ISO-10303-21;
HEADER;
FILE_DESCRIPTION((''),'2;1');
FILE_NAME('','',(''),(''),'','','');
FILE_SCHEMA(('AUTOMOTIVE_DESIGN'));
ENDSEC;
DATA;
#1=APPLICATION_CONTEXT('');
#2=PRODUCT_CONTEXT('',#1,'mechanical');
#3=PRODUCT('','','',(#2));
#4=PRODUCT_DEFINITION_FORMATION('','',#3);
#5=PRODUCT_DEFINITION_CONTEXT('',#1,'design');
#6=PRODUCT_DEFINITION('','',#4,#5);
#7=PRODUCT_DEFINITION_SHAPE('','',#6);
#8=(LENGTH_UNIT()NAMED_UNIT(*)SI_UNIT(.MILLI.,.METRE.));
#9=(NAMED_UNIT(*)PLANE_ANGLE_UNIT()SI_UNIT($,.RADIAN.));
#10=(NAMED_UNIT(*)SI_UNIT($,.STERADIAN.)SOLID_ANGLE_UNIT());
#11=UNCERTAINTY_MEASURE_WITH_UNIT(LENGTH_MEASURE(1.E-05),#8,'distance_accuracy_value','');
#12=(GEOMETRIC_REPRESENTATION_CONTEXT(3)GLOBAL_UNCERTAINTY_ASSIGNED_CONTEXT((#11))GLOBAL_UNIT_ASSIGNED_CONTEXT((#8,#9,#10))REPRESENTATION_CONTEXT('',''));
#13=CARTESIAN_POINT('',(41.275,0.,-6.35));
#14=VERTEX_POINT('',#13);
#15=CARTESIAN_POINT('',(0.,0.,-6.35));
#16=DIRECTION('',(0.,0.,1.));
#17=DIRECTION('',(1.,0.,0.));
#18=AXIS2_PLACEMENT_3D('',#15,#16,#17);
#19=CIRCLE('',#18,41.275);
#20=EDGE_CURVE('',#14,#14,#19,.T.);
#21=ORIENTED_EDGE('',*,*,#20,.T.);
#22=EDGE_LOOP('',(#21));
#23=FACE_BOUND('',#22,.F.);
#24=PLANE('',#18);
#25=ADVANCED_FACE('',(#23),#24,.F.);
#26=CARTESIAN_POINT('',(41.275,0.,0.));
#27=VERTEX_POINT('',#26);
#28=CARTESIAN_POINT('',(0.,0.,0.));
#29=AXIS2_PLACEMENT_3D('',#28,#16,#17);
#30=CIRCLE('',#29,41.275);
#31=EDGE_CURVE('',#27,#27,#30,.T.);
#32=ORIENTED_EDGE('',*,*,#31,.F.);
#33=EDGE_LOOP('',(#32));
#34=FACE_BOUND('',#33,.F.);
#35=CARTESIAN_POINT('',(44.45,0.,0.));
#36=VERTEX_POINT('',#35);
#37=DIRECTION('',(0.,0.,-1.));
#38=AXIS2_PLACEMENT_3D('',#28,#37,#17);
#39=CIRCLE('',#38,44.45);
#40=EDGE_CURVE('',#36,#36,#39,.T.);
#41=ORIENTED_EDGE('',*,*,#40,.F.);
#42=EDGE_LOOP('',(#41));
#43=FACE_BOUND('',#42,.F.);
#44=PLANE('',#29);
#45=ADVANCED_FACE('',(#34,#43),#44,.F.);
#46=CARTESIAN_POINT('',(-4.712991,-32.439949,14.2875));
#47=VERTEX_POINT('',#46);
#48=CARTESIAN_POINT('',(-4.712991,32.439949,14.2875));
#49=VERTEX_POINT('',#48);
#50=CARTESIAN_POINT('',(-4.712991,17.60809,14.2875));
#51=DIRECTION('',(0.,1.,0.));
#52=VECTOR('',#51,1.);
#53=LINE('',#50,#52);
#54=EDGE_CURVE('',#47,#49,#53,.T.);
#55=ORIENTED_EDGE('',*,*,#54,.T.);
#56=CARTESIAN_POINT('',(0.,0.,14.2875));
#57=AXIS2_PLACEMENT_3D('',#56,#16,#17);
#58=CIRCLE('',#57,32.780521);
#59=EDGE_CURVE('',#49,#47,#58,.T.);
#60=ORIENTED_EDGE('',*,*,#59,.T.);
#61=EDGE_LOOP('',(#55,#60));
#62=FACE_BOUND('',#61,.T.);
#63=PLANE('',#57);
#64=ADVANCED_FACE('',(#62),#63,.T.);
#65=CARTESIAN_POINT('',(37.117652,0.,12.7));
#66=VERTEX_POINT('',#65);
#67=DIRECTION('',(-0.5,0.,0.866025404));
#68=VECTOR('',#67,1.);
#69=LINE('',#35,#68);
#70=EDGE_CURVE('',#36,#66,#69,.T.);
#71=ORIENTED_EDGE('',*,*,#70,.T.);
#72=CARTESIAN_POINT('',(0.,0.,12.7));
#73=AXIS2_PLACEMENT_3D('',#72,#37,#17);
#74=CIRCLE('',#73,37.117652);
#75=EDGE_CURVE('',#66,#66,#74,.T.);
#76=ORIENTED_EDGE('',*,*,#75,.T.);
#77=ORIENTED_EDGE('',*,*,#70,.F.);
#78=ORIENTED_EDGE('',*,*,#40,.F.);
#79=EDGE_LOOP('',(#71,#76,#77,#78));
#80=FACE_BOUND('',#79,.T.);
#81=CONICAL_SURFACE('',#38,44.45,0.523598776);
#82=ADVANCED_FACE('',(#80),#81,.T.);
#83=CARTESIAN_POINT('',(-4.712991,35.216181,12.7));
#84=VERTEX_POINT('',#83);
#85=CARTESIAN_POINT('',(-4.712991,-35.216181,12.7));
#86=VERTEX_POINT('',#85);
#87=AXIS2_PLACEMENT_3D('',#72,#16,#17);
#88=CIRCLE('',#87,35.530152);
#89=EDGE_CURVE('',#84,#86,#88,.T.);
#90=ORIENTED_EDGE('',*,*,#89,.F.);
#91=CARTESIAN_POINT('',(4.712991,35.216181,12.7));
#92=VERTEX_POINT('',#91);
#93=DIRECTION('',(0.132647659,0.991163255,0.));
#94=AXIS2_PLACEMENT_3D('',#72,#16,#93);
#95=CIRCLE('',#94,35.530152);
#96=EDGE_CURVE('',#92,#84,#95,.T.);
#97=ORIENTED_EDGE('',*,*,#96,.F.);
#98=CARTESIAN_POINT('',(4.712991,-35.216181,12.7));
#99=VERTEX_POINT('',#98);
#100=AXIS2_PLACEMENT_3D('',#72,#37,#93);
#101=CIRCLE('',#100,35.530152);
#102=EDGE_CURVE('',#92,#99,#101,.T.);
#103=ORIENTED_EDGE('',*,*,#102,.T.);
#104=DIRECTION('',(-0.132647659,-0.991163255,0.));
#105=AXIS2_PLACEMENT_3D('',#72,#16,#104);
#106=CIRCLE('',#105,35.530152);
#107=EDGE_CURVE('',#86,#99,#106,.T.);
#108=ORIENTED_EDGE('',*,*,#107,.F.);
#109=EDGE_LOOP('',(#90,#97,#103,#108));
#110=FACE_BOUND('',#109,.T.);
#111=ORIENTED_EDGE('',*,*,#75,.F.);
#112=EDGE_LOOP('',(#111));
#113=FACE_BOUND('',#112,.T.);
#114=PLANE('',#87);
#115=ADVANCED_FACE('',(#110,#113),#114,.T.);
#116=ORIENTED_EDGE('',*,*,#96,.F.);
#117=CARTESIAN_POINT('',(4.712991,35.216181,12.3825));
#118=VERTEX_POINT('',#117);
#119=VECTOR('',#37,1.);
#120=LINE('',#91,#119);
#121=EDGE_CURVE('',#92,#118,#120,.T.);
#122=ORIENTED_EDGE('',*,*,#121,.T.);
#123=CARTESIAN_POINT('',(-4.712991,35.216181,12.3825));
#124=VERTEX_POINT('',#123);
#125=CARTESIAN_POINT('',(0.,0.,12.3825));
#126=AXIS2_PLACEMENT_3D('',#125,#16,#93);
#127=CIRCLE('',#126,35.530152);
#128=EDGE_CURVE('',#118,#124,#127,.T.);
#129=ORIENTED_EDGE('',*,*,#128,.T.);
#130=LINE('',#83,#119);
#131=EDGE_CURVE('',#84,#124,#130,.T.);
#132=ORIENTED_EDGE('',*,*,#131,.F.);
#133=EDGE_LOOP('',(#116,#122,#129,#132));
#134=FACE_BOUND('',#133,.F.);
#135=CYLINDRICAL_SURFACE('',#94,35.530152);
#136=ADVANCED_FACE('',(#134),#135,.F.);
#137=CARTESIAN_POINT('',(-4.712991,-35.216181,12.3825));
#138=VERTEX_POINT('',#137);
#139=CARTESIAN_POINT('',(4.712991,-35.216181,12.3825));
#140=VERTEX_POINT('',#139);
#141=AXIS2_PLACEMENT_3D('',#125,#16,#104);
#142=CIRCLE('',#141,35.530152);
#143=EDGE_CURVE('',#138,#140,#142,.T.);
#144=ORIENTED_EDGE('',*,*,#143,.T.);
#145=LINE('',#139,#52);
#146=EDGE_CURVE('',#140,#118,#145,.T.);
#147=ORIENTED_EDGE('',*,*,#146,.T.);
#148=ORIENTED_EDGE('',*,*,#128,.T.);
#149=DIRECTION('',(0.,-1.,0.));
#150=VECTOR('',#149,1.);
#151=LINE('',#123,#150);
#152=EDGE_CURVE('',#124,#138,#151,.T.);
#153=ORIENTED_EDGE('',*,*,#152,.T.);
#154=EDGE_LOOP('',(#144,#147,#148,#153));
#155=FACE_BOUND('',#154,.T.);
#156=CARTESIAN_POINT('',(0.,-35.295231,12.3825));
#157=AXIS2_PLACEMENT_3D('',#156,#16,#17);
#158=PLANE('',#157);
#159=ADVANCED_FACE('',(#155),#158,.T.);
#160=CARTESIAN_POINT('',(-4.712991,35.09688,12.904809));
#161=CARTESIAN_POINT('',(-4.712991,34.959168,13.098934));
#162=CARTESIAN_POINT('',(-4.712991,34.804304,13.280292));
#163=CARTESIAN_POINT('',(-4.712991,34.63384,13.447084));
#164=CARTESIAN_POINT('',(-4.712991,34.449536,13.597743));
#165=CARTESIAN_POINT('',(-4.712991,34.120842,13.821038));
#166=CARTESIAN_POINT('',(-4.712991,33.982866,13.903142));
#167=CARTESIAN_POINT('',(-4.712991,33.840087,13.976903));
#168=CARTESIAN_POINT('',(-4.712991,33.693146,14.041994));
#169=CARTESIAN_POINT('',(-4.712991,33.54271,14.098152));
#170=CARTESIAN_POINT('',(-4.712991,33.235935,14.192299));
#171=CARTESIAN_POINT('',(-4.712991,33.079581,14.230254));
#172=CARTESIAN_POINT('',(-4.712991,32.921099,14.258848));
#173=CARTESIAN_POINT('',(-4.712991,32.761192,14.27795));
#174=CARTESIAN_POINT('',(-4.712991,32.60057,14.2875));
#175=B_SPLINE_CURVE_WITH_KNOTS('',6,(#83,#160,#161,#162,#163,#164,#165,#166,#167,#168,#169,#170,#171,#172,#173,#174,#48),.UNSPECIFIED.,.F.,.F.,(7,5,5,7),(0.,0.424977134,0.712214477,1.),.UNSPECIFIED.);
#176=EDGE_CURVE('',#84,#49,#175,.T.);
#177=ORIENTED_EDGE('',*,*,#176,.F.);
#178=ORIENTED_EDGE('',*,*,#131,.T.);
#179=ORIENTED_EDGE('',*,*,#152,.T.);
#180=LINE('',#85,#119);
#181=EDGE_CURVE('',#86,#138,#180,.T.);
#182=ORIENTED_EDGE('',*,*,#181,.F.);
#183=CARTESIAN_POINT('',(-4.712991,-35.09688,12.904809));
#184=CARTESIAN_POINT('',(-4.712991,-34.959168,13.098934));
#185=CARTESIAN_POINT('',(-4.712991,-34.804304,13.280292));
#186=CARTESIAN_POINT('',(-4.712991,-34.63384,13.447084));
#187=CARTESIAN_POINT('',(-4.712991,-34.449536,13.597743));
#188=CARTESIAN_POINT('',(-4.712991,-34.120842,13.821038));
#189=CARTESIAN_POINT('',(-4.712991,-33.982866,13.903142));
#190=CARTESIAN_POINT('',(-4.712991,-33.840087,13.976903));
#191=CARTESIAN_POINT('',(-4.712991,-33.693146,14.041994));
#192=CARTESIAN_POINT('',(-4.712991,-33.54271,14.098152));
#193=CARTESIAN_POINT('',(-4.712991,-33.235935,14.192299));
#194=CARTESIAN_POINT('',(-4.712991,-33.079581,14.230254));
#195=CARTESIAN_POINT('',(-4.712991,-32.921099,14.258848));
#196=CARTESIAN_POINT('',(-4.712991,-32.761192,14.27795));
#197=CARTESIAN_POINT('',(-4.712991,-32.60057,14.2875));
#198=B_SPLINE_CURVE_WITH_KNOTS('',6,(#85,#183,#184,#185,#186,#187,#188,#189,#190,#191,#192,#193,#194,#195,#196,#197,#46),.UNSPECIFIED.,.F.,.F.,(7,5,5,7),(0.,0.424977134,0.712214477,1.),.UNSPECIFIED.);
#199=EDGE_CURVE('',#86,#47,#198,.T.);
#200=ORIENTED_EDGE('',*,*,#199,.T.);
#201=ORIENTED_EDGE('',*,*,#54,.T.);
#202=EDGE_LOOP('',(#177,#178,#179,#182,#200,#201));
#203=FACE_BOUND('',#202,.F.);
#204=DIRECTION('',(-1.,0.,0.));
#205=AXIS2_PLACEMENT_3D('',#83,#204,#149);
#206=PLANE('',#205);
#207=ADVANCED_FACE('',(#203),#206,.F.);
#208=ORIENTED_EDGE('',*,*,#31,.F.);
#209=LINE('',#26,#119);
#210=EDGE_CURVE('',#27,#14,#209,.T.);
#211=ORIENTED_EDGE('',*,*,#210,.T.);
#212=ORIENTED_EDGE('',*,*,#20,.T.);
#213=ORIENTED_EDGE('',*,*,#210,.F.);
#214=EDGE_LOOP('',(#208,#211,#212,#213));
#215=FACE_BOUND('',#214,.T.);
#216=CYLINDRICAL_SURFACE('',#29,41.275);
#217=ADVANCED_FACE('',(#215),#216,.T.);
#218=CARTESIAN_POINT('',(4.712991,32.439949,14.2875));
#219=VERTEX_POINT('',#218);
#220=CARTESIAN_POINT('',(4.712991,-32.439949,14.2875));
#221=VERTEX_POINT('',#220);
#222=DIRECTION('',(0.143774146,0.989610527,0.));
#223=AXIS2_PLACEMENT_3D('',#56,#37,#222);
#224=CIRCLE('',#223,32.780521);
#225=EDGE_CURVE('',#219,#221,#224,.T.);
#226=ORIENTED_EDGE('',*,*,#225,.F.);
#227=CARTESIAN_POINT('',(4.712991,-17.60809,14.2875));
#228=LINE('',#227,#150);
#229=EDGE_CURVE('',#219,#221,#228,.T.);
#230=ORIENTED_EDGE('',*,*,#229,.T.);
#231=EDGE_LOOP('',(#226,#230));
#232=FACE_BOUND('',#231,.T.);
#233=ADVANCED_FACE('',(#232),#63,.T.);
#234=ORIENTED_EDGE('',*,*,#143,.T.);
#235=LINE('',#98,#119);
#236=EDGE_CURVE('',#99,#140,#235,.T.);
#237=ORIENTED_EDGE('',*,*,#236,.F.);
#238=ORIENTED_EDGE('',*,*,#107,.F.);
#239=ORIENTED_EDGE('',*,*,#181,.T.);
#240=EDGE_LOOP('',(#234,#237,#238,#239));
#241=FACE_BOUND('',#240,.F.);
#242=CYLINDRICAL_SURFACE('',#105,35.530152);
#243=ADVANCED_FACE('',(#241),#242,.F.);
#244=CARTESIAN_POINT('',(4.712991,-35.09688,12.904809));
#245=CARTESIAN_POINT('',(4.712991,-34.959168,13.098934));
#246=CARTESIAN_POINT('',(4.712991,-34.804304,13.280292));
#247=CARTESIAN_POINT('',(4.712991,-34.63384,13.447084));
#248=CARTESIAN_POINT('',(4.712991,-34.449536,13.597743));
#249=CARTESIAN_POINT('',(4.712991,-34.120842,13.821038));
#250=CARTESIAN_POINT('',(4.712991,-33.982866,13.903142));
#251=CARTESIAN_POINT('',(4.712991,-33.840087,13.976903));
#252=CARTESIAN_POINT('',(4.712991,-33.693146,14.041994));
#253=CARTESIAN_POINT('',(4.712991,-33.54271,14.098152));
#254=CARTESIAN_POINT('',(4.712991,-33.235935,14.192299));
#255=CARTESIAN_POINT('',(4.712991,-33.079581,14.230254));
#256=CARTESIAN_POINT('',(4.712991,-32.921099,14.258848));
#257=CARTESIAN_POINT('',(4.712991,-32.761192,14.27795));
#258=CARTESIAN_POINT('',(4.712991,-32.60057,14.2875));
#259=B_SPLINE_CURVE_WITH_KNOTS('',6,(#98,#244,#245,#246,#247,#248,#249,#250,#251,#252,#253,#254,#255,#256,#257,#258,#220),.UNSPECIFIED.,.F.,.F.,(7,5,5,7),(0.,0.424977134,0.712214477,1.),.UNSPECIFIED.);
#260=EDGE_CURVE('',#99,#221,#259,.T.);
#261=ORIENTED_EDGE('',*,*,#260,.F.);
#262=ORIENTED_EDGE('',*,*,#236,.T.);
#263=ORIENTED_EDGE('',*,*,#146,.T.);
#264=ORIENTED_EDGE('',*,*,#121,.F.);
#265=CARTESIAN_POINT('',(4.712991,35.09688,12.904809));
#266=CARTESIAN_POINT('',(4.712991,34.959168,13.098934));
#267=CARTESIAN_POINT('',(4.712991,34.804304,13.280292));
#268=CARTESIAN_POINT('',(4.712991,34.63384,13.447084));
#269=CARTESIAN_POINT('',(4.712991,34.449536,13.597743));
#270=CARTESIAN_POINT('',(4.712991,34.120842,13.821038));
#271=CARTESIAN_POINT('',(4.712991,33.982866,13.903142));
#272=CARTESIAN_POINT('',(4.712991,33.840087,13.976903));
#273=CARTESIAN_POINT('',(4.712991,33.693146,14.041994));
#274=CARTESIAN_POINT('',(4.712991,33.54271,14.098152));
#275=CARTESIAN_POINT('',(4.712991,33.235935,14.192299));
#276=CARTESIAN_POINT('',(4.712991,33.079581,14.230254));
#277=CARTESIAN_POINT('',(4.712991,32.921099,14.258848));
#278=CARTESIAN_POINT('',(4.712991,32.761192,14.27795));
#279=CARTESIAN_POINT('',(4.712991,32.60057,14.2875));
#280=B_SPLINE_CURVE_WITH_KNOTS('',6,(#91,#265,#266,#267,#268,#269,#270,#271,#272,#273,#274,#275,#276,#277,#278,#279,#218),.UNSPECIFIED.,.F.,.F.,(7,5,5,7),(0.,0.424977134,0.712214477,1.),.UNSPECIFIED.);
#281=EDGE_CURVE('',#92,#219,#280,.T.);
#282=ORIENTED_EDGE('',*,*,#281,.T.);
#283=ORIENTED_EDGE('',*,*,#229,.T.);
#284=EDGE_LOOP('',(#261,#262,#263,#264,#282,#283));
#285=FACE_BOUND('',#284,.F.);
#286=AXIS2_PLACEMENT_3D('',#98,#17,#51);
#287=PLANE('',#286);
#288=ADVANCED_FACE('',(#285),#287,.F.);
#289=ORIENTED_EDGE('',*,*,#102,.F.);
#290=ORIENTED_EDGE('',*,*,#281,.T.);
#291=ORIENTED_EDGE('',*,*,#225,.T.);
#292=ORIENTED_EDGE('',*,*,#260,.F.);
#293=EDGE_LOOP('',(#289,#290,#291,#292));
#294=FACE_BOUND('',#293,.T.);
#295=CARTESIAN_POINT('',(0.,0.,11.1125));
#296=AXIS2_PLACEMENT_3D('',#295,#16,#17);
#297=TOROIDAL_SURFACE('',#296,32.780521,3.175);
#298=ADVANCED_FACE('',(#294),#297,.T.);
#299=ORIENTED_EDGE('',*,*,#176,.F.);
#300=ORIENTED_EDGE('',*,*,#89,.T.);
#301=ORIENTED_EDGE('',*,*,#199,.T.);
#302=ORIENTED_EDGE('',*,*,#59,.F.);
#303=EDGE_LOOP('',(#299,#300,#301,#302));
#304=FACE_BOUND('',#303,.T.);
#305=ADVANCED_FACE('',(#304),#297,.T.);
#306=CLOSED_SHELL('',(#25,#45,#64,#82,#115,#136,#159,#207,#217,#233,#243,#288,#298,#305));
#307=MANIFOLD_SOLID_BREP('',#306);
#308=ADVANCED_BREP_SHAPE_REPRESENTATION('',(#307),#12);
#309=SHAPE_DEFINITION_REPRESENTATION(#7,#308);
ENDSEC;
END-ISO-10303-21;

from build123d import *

# Parameters (mm, degrees)
F0_R     = 44.45
F0_R_2   = 41.275
F1_DEPTH = 12.7
F1_TAPER = 30
F2_DEPTH = 6.35
F3_R     = 35.5301515813
F4_DEPTH = 1.5875
F7_DEPTH = 2.9464
F8_DEPTH = 0.3175


# Not quite as in the source:
# - a fillet or chamfer that OpenCascade refuses, or shapes differently, is made with other operations: its cross-section is extruded or revolved along the edge and cut away or added


with BuildPart() as f1:
    # F0 (on Top) → F1 (new body)
    with BuildSketch(Plane.XY):
        Circle(F0_R)
        Circle(F0_R_2, mode=Mode.SUBTRACT)
        Circle(F0_R_2)
    extrude(amount=F1_DEPTH, taper=F1_TAPER)

    # F0 (on Top) → F2 (join)
    with BuildSketch(Plane.XY):
        Circle(F0_R_2)
    extrude(amount=-F2_DEPTH)

    # F3 (on face) → F4 (join)
    with BuildSketch(Plane.XY.offset(12.7)):
        Circle(F3_R)
    extrude(amount=F4_DEPTH)

    # F5: fillet of radius 3.175 on 1 edges, made by hand

    # F5_s1 → F5_t2 (revolve, cut)
    with BuildSketch(Plane.XZ):
        with BuildLine():
            ThreePointArc((35.5301515813, 12.7), (34.3680209243, 13.862130657), (32.7805209243, 14.2875))
            Line((32.7805209243, 14.2875), (35.5301515813, 14.2875))
            Line((35.5301515813, 14.2875), (35.5301515813, 12.7))
        make_face()
    revolve(axis=Axis((0, 0, 14.2875), (0, 0, 1)), mode=Mode.SUBTRACT)

    # F6 (on face) → F7 (cut)
    with BuildSketch(Plane.XY.offset(12.7)):
        with BuildLine():
            ThreePointArc((-4.7129914165, -35.0091413817), (0, -35.3249524893), (4.7129914165, -35.0091413817))
            Line((4.7129914165, -35.0091413817), (4.7129914165, 35.0091413817))
            ThreePointArc((4.7129914165, 35.0091413817), (0, 35.3249524893), (-4.7129914165, 35.0091413817))
            Line((-4.7129914165, 35.0091413817), (-4.7129914165, -35.0091413817))
        make_face()
        with BuildLine():
            ThreePointArc((-4.7129914165, -35.2161807029), (0, -35.5301515813), (4.7129914165, -35.2161807029))
            Line((4.7129914165, -35.2161807029), (4.7129914165, -35.0091413817))
            ThreePointArc((4.7129914165, -35.0091413817), (0, -35.3249524893), (-4.7129914165, -35.0091413817))
            Line((-4.7129914165, -35.0091413817), (-4.7129914165, -35.2161807029))
        make_face()
        with BuildLine():
            ThreePointArc((4.7129914165, 35.2161807029), (0, 35.5301515813), (-4.7129914165, 35.2161807029))
            Line((-4.7129914165, 35.2161807029), (-4.7129914165, 35.0091413817))
            ThreePointArc((-4.7129914165, 35.0091413817), (0, 35.3249524893), (4.7129914165, 35.0091413817))
            Line((4.7129914165, 35.0091413817), (4.7129914165, 35.2161807029))
        make_face()
    extrude(amount=F7_DEPTH, mode=Mode.SUBTRACT)

    # F6 (on face) → F8 (cut)
    with BuildSketch(Plane.XY.offset(12.7)):
        with BuildLine():
            ThreePointArc((-4.7129914165, -35.2161807029), (0, -35.5301515813), (4.7129914165, -35.2161807029))
            Line((4.7129914165, -35.2161807029), (4.7129914165, -35.0091413817))
            ThreePointArc((4.7129914165, -35.0091413817), (0, -35.3249524893), (-4.7129914165, -35.0091413817))
            Line((-4.7129914165, -35.0091413817), (-4.7129914165, -35.2161807029))
        make_face()
        with BuildLine():
            ThreePointArc((-4.7129914165, -35.0091413817), (0, -35.3249524893), (4.7129914165, -35.0091413817))
            Line((4.7129914165, -35.0091413817), (4.7129914165, 35.0091413817))
            ThreePointArc((4.7129914165, 35.0091413817), (0, 35.3249524893), (-4.7129914165, 35.0091413817))
            Line((-4.7129914165, 35.0091413817), (-4.7129914165, -35.0091413817))
        make_face()
        with BuildLine():
            ThreePointArc((4.7129914165, 35.2161807029), (0, 35.5301515813), (-4.7129914165, 35.2161807029))
            Line((-4.7129914165, 35.2161807029), (-4.7129914165, 35.0091413817))
            ThreePointArc((-4.7129914165, 35.0091413817), (0, 35.3249524893), (4.7129914165, 35.0091413817))
            Line((4.7129914165, 35.0091413817), (4.7129914165, 35.2161807029))
        make_face()
    extrude(amount=-F8_DEPTH, mode=Mode.SUBTRACT)


solid = f1.part
